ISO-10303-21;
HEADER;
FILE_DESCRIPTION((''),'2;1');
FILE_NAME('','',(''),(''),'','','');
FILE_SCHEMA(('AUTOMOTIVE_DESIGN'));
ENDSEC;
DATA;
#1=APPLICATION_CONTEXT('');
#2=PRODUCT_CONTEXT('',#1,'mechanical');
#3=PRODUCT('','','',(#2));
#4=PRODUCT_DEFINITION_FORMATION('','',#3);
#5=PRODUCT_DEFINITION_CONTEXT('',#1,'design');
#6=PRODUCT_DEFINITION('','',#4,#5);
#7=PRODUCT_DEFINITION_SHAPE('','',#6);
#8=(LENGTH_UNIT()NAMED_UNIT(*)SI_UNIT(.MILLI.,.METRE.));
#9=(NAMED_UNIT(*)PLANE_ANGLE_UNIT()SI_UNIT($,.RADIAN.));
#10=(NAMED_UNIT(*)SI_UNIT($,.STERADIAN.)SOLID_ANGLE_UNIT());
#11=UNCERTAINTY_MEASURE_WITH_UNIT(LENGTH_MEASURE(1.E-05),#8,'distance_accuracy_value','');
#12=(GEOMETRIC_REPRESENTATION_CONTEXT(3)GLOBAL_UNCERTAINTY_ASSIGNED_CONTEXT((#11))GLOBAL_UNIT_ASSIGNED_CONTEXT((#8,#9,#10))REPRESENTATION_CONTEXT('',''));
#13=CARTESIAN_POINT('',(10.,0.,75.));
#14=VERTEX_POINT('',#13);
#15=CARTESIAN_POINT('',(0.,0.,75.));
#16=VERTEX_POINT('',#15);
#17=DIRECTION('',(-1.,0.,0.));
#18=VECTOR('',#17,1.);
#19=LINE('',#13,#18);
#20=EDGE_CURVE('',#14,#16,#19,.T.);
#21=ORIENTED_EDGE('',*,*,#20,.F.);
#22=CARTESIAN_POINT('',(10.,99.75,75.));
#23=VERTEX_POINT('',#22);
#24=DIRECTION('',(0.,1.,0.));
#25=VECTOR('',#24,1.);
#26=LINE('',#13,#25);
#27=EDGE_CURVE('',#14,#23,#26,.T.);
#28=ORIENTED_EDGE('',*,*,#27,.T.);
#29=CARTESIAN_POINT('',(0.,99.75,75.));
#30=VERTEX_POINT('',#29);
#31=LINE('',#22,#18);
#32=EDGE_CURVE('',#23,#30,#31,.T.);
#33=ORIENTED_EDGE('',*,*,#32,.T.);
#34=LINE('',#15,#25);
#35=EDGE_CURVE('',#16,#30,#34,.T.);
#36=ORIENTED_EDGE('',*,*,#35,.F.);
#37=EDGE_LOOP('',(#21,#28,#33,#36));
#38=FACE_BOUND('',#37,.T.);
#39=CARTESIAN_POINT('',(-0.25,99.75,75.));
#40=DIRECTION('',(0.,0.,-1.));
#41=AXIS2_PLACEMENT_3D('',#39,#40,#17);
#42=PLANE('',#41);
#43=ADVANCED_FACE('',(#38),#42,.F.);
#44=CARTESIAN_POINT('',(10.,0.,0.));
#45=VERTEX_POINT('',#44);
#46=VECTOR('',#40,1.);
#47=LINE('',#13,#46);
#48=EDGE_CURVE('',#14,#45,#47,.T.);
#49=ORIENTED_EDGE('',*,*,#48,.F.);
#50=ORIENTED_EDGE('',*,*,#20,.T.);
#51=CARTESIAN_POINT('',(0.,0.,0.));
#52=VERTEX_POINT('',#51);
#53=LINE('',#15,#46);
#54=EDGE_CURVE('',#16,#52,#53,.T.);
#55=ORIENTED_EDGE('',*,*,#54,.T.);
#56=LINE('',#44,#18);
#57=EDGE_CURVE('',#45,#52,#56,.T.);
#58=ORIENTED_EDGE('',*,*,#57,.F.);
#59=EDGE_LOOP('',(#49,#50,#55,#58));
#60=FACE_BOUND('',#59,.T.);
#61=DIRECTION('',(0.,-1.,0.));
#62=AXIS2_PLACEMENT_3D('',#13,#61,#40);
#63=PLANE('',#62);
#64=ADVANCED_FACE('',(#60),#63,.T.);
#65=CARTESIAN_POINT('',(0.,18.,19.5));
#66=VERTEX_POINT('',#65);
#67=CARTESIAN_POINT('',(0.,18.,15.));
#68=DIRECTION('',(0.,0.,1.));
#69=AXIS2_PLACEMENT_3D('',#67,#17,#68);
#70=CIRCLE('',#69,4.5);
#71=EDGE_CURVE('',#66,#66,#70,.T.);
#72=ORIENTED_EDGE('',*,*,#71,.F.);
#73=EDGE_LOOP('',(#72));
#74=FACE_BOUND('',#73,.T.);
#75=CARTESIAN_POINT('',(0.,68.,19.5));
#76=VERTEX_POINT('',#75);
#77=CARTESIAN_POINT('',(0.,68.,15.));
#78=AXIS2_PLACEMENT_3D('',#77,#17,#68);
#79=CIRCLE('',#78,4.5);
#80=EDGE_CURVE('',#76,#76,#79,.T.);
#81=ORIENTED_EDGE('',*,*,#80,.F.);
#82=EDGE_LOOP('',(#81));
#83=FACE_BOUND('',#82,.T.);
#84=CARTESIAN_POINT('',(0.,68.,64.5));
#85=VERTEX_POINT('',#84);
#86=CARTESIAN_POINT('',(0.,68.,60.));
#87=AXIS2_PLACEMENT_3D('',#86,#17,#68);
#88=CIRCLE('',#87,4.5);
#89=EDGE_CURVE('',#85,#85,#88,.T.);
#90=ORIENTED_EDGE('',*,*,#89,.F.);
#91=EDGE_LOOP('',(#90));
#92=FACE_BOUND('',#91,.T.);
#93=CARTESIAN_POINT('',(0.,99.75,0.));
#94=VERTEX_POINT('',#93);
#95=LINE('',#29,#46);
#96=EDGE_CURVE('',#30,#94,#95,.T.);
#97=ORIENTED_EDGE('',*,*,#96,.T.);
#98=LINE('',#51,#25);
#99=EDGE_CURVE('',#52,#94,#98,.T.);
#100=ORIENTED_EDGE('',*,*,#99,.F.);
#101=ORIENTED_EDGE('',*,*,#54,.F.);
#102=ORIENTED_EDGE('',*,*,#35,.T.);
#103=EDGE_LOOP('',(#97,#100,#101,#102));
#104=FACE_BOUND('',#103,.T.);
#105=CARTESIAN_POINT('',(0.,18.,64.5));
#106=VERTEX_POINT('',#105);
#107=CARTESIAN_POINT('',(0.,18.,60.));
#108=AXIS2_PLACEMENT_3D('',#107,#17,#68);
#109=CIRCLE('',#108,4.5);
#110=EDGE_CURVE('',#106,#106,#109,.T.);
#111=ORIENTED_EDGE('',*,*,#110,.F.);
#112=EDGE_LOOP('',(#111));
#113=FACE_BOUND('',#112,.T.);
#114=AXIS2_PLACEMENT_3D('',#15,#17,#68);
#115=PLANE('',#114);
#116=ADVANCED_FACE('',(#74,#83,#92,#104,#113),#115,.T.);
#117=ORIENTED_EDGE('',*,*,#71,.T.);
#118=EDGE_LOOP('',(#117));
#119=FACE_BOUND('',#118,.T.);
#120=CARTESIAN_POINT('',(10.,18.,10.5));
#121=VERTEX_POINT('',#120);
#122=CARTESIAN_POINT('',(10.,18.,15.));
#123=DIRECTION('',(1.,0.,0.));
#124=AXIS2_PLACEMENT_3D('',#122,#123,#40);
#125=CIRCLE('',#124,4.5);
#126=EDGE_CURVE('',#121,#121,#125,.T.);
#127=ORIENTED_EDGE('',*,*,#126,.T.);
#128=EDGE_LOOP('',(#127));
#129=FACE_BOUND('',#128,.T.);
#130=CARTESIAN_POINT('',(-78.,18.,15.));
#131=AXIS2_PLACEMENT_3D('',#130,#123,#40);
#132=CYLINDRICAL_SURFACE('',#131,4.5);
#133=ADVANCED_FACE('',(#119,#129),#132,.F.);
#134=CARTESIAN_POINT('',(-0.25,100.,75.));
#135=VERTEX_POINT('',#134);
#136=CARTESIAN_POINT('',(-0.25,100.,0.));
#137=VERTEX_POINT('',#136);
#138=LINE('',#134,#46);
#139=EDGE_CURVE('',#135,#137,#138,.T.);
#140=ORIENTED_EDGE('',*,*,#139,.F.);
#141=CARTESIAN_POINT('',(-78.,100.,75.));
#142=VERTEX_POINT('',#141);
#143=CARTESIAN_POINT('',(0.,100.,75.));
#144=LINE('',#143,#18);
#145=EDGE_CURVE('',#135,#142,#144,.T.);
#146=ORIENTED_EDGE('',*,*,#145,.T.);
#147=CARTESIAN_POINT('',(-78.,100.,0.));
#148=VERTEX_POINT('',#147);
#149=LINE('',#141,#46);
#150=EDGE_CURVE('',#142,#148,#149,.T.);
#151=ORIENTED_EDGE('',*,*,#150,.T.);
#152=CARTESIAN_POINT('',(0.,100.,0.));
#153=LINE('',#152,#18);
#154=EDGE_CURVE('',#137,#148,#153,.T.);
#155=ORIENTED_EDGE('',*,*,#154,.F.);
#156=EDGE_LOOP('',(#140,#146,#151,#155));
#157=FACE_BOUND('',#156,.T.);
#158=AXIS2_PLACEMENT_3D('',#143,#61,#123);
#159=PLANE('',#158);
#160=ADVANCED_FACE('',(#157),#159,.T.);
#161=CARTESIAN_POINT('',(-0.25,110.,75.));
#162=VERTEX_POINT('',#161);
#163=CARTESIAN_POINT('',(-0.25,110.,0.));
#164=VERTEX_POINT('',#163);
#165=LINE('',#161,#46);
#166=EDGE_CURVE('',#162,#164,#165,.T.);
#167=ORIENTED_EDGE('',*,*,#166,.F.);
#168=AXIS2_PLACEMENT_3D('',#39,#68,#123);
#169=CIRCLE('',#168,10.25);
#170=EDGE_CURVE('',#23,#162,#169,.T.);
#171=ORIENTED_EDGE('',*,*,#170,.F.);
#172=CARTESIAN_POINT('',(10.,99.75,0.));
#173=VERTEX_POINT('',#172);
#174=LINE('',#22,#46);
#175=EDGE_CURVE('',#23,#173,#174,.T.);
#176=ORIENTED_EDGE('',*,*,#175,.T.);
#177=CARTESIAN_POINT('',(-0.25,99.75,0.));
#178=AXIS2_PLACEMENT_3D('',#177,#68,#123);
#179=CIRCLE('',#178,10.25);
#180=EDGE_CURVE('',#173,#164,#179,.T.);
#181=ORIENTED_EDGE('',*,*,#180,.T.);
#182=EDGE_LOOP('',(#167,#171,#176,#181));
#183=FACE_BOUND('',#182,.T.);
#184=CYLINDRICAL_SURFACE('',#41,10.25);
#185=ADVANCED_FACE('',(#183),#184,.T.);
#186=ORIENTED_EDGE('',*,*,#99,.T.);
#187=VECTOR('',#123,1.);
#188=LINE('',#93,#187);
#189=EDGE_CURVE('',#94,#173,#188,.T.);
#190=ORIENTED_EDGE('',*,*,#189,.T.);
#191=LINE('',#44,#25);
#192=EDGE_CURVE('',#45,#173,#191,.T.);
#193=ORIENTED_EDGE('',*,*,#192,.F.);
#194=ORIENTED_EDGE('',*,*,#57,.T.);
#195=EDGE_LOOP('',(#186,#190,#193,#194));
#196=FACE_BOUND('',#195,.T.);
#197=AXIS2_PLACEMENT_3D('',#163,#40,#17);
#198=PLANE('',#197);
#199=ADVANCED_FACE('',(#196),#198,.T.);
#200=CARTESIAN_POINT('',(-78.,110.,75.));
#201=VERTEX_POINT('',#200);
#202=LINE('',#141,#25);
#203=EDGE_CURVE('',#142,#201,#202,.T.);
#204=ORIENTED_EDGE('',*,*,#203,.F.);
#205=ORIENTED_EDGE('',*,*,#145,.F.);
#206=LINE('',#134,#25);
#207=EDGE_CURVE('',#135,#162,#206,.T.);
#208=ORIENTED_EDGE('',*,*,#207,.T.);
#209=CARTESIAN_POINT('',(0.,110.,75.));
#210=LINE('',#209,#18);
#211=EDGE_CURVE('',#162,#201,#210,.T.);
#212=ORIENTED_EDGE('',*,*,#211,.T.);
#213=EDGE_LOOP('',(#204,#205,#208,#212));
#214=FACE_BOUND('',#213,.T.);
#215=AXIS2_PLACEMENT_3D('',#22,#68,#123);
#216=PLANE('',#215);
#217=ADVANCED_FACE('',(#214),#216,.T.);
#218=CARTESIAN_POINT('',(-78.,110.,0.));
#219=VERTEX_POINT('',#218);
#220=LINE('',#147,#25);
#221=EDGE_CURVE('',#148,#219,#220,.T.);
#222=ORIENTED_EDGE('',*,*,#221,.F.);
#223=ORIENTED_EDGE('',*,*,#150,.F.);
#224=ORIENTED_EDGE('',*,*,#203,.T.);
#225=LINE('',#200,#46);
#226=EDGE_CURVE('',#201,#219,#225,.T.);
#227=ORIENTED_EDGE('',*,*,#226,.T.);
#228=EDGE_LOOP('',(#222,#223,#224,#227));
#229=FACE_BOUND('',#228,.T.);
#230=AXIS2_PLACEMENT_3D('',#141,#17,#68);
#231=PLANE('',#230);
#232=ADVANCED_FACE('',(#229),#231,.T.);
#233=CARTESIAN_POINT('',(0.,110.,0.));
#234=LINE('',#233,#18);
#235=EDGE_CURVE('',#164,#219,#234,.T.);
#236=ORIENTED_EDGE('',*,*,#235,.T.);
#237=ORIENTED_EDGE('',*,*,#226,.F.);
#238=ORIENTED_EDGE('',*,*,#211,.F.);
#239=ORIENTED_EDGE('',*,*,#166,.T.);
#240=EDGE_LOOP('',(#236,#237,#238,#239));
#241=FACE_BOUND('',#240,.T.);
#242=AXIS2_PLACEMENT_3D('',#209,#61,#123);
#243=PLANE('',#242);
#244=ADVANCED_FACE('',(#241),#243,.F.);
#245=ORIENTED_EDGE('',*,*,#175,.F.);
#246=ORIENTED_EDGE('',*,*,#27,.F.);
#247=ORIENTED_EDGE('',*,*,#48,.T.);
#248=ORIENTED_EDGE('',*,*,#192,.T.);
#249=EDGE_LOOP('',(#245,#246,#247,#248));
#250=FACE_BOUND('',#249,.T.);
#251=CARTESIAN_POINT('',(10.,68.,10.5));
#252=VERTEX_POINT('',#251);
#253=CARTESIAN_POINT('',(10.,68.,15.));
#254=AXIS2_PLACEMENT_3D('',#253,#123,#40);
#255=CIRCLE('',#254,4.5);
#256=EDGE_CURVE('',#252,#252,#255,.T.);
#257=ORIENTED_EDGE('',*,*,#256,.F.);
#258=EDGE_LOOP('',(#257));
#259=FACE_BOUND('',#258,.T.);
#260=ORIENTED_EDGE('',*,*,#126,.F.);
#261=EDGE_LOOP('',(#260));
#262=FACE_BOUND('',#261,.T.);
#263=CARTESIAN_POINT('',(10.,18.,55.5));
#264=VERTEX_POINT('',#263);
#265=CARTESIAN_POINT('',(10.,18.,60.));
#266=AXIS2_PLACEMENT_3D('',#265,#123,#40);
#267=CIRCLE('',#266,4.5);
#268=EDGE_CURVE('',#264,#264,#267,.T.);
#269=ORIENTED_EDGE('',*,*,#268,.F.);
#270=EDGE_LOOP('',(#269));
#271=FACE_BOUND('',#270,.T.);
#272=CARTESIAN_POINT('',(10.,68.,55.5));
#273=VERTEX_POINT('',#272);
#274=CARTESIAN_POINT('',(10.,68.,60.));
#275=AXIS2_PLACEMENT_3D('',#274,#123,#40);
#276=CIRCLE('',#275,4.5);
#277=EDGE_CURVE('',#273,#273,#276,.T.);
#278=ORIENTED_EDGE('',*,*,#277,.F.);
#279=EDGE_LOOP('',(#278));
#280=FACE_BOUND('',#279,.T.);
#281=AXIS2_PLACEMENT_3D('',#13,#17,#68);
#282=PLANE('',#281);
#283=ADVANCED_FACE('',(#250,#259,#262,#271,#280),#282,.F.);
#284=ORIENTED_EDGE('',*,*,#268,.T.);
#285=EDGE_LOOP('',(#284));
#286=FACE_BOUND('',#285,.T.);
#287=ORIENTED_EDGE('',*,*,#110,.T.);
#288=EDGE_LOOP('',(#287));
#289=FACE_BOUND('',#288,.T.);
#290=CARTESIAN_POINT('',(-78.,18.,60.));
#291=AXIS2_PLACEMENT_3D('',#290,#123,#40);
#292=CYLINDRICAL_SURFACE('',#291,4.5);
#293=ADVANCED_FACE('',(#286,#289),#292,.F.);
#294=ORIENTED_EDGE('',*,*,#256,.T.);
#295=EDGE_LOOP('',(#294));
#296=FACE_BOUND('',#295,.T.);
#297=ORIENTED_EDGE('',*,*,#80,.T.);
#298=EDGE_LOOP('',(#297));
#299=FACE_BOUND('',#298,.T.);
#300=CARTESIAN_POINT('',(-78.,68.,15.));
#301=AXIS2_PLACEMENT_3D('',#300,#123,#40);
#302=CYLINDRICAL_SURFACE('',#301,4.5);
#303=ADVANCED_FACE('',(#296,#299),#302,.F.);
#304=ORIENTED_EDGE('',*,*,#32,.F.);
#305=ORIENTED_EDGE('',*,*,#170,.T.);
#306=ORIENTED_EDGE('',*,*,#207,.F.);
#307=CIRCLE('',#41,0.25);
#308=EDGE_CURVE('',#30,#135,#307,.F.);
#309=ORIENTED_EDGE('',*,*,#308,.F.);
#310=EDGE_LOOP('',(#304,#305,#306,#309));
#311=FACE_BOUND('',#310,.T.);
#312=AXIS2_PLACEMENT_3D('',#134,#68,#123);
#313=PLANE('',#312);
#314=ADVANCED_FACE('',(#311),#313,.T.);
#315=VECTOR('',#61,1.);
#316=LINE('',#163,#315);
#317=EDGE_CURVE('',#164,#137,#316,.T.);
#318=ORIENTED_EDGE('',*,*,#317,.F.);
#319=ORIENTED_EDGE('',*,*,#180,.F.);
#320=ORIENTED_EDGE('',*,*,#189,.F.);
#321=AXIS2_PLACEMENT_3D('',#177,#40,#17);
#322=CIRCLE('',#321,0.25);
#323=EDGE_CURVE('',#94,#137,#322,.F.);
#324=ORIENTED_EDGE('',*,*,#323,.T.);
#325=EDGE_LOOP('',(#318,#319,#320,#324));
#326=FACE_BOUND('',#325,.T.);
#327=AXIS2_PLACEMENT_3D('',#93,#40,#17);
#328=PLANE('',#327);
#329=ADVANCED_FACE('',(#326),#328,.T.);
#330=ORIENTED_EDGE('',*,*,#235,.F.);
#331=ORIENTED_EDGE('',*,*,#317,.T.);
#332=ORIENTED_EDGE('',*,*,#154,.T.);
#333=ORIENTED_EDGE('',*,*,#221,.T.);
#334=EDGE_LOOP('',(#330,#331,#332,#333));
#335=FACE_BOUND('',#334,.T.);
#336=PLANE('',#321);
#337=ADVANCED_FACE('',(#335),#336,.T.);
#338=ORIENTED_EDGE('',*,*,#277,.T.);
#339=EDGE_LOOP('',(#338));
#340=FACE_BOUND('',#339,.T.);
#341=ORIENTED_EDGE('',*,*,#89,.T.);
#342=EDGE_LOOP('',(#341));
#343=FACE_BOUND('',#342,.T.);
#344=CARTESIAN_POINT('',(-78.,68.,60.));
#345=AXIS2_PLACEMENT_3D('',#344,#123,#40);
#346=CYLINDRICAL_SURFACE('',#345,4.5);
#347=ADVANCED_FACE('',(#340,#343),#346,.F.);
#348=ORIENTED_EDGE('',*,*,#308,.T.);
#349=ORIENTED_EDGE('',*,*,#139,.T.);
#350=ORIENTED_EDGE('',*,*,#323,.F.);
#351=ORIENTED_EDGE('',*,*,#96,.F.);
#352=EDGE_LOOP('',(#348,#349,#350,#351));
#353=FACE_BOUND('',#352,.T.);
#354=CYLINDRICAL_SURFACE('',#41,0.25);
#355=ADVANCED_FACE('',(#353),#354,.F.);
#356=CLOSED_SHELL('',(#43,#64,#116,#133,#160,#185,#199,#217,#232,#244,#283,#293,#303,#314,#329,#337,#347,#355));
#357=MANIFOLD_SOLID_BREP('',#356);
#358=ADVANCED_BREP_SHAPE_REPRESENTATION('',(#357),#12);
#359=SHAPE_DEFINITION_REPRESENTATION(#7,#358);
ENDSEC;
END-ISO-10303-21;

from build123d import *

# Parameters (mm, degrees)
BASE_FLANGE1_DEPTH = 75
SKETCH6_R          = 4.5
CUT_EXTRUDE1_DEPTH = 160.590099944


# Sheet-metal steps are written as plain solids
with BuildPart() as part:
    # Sketch1 → Base-Flange1 (new body)
    with BuildSketch(Plane.XY):
        with BuildLine():
            Line((0, 0), (0, 99.75))
            ThreePointArc((0, 99.75), (-0.073223305, 99.926776695), (-0.25, 100))
            Line((-0.25, 100), (-78, 100))
            Line((-78, 100), (-78, 110))
            Line((-78, 110), (-0.25, 110))
            ThreePointArc((-0.25, 110), (6.997844507, 106.997844507), (10, 99.75))
            Line((10, 99.75), (10, 0))
            Line((10, 0), (0, 0))
        make_face()
    extrude(amount=BASE_FLANGE1_DEPTH)

    # Sketch6 → Cut-Extrude1 (cut, through all)
    with BuildSketch(Plane(origin=(10, 0, 0), x_dir=(0, 0, -1), z_dir=(1, 0, 0))):
        with Locations((-60, 18)):
            Circle(SKETCH6_R)
        with Locations((-15, 18)):
            Circle(SKETCH6_R)
        with Locations((-60, 68)):
            Circle(SKETCH6_R)
        with Locations((-15, 68)):
            Circle(SKETCH6_R)
    extrude(amount=-CUT_EXTRUDE1_DEPTH, mode=Mode.SUBTRACT)


solid = part.part
